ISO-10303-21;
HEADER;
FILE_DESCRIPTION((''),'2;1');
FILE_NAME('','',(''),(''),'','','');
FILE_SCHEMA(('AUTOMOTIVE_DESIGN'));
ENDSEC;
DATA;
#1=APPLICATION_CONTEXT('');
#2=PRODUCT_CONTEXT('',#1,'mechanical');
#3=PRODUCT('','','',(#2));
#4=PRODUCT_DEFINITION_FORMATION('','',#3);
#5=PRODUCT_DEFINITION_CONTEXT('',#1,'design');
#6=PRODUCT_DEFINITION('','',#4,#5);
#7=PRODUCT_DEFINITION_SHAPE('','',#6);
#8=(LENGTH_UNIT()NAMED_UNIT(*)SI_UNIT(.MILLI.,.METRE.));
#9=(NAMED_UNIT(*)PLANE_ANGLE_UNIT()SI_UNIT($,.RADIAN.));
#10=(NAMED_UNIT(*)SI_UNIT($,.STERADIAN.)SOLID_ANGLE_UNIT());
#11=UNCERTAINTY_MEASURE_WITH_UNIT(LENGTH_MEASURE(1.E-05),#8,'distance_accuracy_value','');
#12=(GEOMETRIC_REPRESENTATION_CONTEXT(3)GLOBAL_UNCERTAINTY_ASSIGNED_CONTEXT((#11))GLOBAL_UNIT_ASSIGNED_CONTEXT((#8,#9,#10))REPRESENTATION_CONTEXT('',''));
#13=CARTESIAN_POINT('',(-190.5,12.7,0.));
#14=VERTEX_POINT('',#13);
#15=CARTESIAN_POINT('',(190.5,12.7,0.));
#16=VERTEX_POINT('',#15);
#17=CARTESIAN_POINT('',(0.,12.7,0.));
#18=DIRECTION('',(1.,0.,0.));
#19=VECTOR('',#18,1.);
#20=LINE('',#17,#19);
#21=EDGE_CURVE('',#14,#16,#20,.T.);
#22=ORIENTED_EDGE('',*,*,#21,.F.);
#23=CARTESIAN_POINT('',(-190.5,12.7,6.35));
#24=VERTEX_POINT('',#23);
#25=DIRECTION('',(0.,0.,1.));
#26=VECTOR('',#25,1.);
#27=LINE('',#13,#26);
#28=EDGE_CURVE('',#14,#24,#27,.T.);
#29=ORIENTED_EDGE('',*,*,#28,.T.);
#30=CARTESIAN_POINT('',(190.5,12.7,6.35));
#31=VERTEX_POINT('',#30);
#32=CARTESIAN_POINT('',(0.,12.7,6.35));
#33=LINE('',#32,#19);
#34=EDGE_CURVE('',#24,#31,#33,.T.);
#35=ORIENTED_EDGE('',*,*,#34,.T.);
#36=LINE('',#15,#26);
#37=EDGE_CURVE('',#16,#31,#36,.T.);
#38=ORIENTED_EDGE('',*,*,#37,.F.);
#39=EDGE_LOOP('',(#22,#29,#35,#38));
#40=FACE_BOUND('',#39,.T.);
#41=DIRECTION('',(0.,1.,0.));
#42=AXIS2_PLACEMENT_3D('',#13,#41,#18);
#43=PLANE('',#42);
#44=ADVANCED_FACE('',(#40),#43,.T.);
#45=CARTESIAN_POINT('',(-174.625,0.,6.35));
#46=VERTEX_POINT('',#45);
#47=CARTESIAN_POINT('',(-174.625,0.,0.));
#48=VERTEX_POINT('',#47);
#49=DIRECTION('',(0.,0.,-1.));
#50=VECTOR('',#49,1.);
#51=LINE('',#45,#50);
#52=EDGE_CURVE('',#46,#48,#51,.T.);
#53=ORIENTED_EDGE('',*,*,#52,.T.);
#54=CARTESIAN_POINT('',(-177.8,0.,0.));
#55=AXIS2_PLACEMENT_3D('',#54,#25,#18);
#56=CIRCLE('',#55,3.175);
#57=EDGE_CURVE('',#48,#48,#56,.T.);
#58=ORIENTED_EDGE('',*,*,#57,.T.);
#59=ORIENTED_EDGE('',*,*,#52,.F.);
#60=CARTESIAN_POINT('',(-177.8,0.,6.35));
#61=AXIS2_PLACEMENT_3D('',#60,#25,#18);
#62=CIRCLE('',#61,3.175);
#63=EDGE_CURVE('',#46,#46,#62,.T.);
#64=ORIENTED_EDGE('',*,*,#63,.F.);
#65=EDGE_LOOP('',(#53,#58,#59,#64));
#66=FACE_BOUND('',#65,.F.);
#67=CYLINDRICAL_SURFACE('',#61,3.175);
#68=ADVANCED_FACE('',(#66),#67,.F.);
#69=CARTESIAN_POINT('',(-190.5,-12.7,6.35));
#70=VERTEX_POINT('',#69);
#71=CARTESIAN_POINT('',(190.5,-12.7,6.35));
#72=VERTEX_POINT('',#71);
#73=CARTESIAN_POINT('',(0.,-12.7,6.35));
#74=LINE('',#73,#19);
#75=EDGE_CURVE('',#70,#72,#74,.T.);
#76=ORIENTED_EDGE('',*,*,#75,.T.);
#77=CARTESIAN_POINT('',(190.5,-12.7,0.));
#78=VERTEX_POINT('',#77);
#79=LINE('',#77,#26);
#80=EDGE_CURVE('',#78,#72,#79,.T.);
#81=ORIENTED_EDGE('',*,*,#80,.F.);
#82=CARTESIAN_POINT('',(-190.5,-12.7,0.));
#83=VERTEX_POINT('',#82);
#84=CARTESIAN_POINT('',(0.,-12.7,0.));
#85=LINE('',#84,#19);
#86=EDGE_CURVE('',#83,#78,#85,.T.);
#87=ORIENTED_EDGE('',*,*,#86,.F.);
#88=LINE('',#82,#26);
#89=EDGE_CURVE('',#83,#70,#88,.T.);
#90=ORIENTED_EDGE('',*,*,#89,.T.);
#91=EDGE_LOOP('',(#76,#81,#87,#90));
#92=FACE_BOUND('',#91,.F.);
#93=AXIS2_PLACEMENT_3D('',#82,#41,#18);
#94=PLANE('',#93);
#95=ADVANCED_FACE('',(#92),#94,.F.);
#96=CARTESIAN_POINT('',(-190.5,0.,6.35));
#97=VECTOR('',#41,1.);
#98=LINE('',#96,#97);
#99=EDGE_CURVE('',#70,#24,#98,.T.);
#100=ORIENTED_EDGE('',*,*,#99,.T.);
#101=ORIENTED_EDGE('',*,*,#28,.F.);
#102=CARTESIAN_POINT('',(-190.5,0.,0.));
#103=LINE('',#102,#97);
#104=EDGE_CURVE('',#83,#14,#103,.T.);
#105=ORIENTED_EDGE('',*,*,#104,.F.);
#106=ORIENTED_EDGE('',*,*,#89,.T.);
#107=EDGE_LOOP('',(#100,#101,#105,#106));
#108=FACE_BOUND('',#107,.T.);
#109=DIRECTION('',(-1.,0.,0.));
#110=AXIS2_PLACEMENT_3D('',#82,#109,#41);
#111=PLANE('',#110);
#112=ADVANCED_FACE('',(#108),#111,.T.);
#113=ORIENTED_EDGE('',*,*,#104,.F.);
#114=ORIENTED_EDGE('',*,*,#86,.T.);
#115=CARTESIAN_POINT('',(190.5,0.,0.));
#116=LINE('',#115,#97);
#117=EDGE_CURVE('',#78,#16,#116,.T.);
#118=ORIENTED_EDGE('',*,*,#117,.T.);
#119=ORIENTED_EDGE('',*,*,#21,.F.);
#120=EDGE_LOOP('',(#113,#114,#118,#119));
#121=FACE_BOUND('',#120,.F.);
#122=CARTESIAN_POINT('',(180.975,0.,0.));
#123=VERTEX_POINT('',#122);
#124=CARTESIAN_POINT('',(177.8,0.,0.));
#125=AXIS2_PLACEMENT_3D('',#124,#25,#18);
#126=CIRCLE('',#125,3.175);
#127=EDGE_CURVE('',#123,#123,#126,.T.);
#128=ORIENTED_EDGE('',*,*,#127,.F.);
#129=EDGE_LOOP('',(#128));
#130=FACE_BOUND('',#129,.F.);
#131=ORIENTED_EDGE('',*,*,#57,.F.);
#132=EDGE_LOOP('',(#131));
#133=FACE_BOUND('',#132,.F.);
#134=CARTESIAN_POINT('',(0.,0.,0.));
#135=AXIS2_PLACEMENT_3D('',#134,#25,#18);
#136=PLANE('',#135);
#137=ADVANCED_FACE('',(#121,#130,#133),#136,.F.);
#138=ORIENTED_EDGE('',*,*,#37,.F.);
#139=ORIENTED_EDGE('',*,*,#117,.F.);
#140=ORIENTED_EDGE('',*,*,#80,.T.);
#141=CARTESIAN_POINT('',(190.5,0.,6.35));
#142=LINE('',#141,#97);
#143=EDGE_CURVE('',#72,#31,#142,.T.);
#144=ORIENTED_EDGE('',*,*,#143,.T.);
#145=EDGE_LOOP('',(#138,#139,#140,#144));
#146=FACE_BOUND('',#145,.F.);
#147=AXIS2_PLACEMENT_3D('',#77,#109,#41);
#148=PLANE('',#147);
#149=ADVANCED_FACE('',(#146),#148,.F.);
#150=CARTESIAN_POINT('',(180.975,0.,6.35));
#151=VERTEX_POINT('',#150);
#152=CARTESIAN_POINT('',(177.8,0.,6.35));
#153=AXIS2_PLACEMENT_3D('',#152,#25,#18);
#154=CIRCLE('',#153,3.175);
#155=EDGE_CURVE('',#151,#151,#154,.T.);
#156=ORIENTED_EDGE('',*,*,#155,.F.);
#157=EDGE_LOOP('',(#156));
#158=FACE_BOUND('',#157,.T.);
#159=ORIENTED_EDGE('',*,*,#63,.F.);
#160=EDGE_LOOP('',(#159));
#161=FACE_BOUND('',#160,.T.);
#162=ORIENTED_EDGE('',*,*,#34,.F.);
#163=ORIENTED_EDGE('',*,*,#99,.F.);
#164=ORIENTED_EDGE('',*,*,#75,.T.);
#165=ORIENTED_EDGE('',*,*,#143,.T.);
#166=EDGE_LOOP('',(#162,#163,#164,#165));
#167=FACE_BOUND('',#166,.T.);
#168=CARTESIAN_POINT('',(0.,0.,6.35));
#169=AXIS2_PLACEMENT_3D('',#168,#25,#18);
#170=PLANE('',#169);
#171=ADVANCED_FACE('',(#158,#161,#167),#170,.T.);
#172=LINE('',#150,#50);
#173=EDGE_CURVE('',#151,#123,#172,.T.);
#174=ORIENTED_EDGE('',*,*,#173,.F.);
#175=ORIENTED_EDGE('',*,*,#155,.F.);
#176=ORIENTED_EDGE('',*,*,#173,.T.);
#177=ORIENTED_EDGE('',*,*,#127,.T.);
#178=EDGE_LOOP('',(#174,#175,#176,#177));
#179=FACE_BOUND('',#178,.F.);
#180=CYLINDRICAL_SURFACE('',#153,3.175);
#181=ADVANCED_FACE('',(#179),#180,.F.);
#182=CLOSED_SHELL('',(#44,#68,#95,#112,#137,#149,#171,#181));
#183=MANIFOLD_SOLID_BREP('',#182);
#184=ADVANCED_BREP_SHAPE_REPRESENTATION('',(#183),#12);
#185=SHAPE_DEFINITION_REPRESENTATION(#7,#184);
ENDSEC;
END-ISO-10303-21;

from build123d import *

# Parameters (mm, degrees)
F0_W     = 381
F0_H     = 25.4
F1_DEPTH = 6.35
F2_R     = 3.175
F3_DEPTH = 25.4


# Not quite as in the source:
# - a feature names something its author has since deleted; it is built from what else it names


with BuildPart() as f1:
    # F0 (on Top) → F1 (new body)
    with BuildSketch(Plane.XY):
        Rectangle(F0_W, F0_H)
    extrude(amount=F1_DEPTH)

    # F2 (on face) → F3 (cut)
    with BuildSketch(Plane.XY.offset(6.35)):
        with Locations((-177.8, 0)):
            Circle(F2_R)
        with Locations((177.8, 0)):
            Circle(F2_R)
    extrude(amount=-F3_DEPTH, mode=Mode.SUBTRACT)


solid = f1.part
